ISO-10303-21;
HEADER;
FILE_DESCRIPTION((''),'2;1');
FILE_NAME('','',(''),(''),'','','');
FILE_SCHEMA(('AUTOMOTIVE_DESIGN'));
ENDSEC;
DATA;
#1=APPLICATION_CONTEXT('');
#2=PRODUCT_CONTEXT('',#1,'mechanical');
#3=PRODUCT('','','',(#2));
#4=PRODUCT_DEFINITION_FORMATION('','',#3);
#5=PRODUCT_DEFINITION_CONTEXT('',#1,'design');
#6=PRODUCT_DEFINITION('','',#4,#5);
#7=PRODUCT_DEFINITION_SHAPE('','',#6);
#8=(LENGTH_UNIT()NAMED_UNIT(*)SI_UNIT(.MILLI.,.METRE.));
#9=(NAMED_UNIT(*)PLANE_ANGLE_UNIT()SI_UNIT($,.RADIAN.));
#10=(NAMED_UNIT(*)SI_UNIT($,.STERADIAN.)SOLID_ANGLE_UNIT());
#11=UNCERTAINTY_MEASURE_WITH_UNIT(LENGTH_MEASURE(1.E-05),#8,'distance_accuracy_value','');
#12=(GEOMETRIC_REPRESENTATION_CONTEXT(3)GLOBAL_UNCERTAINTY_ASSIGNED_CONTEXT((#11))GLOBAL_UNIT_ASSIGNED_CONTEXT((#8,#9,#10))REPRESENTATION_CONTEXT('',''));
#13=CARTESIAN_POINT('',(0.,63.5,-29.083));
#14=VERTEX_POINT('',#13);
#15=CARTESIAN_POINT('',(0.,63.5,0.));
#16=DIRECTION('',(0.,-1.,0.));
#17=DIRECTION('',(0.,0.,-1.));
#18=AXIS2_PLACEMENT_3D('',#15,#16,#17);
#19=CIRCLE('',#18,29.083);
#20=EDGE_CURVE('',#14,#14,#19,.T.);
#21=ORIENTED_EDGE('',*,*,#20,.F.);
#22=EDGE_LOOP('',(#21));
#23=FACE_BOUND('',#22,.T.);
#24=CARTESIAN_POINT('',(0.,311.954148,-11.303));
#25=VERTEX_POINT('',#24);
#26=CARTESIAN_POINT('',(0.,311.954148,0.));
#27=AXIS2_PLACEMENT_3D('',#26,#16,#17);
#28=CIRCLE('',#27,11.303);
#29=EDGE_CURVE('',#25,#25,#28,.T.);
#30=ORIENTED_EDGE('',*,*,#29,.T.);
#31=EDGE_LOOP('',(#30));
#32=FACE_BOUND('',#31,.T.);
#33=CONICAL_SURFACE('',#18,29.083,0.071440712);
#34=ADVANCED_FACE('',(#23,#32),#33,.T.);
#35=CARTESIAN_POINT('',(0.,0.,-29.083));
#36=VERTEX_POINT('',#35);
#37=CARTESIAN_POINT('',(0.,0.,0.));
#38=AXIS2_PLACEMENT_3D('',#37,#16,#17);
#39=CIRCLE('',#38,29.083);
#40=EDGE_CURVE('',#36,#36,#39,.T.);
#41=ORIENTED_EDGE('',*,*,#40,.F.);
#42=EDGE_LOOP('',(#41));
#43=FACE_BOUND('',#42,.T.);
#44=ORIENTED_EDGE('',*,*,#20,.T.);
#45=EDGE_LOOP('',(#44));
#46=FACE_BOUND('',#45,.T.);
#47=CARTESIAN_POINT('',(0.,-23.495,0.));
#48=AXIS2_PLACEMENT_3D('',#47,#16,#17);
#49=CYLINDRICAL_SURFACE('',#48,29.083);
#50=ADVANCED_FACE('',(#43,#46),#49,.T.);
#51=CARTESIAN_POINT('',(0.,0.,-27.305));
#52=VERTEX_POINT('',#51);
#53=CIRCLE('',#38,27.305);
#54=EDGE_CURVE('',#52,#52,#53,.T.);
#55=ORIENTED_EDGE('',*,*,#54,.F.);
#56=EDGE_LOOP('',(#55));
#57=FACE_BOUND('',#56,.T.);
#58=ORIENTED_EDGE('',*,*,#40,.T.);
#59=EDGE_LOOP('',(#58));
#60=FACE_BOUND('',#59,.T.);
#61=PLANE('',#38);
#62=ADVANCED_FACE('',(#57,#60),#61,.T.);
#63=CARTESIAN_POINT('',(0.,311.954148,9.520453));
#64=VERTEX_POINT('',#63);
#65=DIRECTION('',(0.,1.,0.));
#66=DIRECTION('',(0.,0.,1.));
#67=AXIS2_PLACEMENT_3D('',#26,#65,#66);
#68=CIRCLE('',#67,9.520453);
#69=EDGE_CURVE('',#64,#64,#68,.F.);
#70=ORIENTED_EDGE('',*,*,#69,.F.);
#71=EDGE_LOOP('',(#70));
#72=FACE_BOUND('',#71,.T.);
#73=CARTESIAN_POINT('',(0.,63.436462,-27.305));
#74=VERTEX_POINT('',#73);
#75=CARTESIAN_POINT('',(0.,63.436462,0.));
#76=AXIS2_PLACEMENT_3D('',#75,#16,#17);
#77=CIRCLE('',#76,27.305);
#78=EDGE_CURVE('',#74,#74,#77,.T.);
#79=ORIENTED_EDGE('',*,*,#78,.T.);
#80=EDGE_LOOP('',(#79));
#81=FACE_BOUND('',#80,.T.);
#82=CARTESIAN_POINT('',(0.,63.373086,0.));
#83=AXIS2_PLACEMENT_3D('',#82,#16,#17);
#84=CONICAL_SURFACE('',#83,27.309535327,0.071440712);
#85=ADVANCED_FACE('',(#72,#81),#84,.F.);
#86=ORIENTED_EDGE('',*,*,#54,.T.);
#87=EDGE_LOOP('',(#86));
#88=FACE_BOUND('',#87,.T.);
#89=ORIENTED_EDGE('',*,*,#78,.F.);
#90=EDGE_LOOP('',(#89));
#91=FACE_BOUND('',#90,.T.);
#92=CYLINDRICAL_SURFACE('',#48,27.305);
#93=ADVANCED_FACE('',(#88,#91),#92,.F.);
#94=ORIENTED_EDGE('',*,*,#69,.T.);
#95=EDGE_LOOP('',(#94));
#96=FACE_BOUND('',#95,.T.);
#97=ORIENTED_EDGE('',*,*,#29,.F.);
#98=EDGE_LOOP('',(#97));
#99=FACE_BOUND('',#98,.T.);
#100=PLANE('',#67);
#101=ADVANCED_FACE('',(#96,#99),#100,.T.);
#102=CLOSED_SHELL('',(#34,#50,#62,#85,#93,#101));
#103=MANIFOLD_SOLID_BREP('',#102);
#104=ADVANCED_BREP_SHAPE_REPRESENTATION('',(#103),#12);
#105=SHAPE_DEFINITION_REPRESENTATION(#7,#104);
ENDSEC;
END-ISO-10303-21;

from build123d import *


# Read off the part's stored shape, not the designer's step: Shell1
with BuildPart() as part:
    # Sketch1 → Revolve2 (revolve)
    with BuildSketch(Plane.XY, mode=Mode.PRIVATE) as revolve2_sk:
        Polygon((29.083, 0), (29.083, 63.5), (11.303, 311.954148472), (0, 311.954148472), (0, 0), align=None)
    revolve(revolve2_sk.sketch.rotate(Axis((0, -23.495, 0), (0, 1, 0)), 90), axis=Axis((0, -23.495, 0), (0, 1, 0)))

    # Shell1 outline → Shell1 (revolve, cut)
    with BuildSketch(Plane.XY):
        Polygon((27.305, 0), (27.305, 63.436462181), (9.520453075, 311.954148472), (0, 311.954148472), (0, 0), align=None)
    revolve(axis=Axis((0, 0, 0), (0, 1, 0)), mode=Mode.SUBTRACT)


solid = part.part
